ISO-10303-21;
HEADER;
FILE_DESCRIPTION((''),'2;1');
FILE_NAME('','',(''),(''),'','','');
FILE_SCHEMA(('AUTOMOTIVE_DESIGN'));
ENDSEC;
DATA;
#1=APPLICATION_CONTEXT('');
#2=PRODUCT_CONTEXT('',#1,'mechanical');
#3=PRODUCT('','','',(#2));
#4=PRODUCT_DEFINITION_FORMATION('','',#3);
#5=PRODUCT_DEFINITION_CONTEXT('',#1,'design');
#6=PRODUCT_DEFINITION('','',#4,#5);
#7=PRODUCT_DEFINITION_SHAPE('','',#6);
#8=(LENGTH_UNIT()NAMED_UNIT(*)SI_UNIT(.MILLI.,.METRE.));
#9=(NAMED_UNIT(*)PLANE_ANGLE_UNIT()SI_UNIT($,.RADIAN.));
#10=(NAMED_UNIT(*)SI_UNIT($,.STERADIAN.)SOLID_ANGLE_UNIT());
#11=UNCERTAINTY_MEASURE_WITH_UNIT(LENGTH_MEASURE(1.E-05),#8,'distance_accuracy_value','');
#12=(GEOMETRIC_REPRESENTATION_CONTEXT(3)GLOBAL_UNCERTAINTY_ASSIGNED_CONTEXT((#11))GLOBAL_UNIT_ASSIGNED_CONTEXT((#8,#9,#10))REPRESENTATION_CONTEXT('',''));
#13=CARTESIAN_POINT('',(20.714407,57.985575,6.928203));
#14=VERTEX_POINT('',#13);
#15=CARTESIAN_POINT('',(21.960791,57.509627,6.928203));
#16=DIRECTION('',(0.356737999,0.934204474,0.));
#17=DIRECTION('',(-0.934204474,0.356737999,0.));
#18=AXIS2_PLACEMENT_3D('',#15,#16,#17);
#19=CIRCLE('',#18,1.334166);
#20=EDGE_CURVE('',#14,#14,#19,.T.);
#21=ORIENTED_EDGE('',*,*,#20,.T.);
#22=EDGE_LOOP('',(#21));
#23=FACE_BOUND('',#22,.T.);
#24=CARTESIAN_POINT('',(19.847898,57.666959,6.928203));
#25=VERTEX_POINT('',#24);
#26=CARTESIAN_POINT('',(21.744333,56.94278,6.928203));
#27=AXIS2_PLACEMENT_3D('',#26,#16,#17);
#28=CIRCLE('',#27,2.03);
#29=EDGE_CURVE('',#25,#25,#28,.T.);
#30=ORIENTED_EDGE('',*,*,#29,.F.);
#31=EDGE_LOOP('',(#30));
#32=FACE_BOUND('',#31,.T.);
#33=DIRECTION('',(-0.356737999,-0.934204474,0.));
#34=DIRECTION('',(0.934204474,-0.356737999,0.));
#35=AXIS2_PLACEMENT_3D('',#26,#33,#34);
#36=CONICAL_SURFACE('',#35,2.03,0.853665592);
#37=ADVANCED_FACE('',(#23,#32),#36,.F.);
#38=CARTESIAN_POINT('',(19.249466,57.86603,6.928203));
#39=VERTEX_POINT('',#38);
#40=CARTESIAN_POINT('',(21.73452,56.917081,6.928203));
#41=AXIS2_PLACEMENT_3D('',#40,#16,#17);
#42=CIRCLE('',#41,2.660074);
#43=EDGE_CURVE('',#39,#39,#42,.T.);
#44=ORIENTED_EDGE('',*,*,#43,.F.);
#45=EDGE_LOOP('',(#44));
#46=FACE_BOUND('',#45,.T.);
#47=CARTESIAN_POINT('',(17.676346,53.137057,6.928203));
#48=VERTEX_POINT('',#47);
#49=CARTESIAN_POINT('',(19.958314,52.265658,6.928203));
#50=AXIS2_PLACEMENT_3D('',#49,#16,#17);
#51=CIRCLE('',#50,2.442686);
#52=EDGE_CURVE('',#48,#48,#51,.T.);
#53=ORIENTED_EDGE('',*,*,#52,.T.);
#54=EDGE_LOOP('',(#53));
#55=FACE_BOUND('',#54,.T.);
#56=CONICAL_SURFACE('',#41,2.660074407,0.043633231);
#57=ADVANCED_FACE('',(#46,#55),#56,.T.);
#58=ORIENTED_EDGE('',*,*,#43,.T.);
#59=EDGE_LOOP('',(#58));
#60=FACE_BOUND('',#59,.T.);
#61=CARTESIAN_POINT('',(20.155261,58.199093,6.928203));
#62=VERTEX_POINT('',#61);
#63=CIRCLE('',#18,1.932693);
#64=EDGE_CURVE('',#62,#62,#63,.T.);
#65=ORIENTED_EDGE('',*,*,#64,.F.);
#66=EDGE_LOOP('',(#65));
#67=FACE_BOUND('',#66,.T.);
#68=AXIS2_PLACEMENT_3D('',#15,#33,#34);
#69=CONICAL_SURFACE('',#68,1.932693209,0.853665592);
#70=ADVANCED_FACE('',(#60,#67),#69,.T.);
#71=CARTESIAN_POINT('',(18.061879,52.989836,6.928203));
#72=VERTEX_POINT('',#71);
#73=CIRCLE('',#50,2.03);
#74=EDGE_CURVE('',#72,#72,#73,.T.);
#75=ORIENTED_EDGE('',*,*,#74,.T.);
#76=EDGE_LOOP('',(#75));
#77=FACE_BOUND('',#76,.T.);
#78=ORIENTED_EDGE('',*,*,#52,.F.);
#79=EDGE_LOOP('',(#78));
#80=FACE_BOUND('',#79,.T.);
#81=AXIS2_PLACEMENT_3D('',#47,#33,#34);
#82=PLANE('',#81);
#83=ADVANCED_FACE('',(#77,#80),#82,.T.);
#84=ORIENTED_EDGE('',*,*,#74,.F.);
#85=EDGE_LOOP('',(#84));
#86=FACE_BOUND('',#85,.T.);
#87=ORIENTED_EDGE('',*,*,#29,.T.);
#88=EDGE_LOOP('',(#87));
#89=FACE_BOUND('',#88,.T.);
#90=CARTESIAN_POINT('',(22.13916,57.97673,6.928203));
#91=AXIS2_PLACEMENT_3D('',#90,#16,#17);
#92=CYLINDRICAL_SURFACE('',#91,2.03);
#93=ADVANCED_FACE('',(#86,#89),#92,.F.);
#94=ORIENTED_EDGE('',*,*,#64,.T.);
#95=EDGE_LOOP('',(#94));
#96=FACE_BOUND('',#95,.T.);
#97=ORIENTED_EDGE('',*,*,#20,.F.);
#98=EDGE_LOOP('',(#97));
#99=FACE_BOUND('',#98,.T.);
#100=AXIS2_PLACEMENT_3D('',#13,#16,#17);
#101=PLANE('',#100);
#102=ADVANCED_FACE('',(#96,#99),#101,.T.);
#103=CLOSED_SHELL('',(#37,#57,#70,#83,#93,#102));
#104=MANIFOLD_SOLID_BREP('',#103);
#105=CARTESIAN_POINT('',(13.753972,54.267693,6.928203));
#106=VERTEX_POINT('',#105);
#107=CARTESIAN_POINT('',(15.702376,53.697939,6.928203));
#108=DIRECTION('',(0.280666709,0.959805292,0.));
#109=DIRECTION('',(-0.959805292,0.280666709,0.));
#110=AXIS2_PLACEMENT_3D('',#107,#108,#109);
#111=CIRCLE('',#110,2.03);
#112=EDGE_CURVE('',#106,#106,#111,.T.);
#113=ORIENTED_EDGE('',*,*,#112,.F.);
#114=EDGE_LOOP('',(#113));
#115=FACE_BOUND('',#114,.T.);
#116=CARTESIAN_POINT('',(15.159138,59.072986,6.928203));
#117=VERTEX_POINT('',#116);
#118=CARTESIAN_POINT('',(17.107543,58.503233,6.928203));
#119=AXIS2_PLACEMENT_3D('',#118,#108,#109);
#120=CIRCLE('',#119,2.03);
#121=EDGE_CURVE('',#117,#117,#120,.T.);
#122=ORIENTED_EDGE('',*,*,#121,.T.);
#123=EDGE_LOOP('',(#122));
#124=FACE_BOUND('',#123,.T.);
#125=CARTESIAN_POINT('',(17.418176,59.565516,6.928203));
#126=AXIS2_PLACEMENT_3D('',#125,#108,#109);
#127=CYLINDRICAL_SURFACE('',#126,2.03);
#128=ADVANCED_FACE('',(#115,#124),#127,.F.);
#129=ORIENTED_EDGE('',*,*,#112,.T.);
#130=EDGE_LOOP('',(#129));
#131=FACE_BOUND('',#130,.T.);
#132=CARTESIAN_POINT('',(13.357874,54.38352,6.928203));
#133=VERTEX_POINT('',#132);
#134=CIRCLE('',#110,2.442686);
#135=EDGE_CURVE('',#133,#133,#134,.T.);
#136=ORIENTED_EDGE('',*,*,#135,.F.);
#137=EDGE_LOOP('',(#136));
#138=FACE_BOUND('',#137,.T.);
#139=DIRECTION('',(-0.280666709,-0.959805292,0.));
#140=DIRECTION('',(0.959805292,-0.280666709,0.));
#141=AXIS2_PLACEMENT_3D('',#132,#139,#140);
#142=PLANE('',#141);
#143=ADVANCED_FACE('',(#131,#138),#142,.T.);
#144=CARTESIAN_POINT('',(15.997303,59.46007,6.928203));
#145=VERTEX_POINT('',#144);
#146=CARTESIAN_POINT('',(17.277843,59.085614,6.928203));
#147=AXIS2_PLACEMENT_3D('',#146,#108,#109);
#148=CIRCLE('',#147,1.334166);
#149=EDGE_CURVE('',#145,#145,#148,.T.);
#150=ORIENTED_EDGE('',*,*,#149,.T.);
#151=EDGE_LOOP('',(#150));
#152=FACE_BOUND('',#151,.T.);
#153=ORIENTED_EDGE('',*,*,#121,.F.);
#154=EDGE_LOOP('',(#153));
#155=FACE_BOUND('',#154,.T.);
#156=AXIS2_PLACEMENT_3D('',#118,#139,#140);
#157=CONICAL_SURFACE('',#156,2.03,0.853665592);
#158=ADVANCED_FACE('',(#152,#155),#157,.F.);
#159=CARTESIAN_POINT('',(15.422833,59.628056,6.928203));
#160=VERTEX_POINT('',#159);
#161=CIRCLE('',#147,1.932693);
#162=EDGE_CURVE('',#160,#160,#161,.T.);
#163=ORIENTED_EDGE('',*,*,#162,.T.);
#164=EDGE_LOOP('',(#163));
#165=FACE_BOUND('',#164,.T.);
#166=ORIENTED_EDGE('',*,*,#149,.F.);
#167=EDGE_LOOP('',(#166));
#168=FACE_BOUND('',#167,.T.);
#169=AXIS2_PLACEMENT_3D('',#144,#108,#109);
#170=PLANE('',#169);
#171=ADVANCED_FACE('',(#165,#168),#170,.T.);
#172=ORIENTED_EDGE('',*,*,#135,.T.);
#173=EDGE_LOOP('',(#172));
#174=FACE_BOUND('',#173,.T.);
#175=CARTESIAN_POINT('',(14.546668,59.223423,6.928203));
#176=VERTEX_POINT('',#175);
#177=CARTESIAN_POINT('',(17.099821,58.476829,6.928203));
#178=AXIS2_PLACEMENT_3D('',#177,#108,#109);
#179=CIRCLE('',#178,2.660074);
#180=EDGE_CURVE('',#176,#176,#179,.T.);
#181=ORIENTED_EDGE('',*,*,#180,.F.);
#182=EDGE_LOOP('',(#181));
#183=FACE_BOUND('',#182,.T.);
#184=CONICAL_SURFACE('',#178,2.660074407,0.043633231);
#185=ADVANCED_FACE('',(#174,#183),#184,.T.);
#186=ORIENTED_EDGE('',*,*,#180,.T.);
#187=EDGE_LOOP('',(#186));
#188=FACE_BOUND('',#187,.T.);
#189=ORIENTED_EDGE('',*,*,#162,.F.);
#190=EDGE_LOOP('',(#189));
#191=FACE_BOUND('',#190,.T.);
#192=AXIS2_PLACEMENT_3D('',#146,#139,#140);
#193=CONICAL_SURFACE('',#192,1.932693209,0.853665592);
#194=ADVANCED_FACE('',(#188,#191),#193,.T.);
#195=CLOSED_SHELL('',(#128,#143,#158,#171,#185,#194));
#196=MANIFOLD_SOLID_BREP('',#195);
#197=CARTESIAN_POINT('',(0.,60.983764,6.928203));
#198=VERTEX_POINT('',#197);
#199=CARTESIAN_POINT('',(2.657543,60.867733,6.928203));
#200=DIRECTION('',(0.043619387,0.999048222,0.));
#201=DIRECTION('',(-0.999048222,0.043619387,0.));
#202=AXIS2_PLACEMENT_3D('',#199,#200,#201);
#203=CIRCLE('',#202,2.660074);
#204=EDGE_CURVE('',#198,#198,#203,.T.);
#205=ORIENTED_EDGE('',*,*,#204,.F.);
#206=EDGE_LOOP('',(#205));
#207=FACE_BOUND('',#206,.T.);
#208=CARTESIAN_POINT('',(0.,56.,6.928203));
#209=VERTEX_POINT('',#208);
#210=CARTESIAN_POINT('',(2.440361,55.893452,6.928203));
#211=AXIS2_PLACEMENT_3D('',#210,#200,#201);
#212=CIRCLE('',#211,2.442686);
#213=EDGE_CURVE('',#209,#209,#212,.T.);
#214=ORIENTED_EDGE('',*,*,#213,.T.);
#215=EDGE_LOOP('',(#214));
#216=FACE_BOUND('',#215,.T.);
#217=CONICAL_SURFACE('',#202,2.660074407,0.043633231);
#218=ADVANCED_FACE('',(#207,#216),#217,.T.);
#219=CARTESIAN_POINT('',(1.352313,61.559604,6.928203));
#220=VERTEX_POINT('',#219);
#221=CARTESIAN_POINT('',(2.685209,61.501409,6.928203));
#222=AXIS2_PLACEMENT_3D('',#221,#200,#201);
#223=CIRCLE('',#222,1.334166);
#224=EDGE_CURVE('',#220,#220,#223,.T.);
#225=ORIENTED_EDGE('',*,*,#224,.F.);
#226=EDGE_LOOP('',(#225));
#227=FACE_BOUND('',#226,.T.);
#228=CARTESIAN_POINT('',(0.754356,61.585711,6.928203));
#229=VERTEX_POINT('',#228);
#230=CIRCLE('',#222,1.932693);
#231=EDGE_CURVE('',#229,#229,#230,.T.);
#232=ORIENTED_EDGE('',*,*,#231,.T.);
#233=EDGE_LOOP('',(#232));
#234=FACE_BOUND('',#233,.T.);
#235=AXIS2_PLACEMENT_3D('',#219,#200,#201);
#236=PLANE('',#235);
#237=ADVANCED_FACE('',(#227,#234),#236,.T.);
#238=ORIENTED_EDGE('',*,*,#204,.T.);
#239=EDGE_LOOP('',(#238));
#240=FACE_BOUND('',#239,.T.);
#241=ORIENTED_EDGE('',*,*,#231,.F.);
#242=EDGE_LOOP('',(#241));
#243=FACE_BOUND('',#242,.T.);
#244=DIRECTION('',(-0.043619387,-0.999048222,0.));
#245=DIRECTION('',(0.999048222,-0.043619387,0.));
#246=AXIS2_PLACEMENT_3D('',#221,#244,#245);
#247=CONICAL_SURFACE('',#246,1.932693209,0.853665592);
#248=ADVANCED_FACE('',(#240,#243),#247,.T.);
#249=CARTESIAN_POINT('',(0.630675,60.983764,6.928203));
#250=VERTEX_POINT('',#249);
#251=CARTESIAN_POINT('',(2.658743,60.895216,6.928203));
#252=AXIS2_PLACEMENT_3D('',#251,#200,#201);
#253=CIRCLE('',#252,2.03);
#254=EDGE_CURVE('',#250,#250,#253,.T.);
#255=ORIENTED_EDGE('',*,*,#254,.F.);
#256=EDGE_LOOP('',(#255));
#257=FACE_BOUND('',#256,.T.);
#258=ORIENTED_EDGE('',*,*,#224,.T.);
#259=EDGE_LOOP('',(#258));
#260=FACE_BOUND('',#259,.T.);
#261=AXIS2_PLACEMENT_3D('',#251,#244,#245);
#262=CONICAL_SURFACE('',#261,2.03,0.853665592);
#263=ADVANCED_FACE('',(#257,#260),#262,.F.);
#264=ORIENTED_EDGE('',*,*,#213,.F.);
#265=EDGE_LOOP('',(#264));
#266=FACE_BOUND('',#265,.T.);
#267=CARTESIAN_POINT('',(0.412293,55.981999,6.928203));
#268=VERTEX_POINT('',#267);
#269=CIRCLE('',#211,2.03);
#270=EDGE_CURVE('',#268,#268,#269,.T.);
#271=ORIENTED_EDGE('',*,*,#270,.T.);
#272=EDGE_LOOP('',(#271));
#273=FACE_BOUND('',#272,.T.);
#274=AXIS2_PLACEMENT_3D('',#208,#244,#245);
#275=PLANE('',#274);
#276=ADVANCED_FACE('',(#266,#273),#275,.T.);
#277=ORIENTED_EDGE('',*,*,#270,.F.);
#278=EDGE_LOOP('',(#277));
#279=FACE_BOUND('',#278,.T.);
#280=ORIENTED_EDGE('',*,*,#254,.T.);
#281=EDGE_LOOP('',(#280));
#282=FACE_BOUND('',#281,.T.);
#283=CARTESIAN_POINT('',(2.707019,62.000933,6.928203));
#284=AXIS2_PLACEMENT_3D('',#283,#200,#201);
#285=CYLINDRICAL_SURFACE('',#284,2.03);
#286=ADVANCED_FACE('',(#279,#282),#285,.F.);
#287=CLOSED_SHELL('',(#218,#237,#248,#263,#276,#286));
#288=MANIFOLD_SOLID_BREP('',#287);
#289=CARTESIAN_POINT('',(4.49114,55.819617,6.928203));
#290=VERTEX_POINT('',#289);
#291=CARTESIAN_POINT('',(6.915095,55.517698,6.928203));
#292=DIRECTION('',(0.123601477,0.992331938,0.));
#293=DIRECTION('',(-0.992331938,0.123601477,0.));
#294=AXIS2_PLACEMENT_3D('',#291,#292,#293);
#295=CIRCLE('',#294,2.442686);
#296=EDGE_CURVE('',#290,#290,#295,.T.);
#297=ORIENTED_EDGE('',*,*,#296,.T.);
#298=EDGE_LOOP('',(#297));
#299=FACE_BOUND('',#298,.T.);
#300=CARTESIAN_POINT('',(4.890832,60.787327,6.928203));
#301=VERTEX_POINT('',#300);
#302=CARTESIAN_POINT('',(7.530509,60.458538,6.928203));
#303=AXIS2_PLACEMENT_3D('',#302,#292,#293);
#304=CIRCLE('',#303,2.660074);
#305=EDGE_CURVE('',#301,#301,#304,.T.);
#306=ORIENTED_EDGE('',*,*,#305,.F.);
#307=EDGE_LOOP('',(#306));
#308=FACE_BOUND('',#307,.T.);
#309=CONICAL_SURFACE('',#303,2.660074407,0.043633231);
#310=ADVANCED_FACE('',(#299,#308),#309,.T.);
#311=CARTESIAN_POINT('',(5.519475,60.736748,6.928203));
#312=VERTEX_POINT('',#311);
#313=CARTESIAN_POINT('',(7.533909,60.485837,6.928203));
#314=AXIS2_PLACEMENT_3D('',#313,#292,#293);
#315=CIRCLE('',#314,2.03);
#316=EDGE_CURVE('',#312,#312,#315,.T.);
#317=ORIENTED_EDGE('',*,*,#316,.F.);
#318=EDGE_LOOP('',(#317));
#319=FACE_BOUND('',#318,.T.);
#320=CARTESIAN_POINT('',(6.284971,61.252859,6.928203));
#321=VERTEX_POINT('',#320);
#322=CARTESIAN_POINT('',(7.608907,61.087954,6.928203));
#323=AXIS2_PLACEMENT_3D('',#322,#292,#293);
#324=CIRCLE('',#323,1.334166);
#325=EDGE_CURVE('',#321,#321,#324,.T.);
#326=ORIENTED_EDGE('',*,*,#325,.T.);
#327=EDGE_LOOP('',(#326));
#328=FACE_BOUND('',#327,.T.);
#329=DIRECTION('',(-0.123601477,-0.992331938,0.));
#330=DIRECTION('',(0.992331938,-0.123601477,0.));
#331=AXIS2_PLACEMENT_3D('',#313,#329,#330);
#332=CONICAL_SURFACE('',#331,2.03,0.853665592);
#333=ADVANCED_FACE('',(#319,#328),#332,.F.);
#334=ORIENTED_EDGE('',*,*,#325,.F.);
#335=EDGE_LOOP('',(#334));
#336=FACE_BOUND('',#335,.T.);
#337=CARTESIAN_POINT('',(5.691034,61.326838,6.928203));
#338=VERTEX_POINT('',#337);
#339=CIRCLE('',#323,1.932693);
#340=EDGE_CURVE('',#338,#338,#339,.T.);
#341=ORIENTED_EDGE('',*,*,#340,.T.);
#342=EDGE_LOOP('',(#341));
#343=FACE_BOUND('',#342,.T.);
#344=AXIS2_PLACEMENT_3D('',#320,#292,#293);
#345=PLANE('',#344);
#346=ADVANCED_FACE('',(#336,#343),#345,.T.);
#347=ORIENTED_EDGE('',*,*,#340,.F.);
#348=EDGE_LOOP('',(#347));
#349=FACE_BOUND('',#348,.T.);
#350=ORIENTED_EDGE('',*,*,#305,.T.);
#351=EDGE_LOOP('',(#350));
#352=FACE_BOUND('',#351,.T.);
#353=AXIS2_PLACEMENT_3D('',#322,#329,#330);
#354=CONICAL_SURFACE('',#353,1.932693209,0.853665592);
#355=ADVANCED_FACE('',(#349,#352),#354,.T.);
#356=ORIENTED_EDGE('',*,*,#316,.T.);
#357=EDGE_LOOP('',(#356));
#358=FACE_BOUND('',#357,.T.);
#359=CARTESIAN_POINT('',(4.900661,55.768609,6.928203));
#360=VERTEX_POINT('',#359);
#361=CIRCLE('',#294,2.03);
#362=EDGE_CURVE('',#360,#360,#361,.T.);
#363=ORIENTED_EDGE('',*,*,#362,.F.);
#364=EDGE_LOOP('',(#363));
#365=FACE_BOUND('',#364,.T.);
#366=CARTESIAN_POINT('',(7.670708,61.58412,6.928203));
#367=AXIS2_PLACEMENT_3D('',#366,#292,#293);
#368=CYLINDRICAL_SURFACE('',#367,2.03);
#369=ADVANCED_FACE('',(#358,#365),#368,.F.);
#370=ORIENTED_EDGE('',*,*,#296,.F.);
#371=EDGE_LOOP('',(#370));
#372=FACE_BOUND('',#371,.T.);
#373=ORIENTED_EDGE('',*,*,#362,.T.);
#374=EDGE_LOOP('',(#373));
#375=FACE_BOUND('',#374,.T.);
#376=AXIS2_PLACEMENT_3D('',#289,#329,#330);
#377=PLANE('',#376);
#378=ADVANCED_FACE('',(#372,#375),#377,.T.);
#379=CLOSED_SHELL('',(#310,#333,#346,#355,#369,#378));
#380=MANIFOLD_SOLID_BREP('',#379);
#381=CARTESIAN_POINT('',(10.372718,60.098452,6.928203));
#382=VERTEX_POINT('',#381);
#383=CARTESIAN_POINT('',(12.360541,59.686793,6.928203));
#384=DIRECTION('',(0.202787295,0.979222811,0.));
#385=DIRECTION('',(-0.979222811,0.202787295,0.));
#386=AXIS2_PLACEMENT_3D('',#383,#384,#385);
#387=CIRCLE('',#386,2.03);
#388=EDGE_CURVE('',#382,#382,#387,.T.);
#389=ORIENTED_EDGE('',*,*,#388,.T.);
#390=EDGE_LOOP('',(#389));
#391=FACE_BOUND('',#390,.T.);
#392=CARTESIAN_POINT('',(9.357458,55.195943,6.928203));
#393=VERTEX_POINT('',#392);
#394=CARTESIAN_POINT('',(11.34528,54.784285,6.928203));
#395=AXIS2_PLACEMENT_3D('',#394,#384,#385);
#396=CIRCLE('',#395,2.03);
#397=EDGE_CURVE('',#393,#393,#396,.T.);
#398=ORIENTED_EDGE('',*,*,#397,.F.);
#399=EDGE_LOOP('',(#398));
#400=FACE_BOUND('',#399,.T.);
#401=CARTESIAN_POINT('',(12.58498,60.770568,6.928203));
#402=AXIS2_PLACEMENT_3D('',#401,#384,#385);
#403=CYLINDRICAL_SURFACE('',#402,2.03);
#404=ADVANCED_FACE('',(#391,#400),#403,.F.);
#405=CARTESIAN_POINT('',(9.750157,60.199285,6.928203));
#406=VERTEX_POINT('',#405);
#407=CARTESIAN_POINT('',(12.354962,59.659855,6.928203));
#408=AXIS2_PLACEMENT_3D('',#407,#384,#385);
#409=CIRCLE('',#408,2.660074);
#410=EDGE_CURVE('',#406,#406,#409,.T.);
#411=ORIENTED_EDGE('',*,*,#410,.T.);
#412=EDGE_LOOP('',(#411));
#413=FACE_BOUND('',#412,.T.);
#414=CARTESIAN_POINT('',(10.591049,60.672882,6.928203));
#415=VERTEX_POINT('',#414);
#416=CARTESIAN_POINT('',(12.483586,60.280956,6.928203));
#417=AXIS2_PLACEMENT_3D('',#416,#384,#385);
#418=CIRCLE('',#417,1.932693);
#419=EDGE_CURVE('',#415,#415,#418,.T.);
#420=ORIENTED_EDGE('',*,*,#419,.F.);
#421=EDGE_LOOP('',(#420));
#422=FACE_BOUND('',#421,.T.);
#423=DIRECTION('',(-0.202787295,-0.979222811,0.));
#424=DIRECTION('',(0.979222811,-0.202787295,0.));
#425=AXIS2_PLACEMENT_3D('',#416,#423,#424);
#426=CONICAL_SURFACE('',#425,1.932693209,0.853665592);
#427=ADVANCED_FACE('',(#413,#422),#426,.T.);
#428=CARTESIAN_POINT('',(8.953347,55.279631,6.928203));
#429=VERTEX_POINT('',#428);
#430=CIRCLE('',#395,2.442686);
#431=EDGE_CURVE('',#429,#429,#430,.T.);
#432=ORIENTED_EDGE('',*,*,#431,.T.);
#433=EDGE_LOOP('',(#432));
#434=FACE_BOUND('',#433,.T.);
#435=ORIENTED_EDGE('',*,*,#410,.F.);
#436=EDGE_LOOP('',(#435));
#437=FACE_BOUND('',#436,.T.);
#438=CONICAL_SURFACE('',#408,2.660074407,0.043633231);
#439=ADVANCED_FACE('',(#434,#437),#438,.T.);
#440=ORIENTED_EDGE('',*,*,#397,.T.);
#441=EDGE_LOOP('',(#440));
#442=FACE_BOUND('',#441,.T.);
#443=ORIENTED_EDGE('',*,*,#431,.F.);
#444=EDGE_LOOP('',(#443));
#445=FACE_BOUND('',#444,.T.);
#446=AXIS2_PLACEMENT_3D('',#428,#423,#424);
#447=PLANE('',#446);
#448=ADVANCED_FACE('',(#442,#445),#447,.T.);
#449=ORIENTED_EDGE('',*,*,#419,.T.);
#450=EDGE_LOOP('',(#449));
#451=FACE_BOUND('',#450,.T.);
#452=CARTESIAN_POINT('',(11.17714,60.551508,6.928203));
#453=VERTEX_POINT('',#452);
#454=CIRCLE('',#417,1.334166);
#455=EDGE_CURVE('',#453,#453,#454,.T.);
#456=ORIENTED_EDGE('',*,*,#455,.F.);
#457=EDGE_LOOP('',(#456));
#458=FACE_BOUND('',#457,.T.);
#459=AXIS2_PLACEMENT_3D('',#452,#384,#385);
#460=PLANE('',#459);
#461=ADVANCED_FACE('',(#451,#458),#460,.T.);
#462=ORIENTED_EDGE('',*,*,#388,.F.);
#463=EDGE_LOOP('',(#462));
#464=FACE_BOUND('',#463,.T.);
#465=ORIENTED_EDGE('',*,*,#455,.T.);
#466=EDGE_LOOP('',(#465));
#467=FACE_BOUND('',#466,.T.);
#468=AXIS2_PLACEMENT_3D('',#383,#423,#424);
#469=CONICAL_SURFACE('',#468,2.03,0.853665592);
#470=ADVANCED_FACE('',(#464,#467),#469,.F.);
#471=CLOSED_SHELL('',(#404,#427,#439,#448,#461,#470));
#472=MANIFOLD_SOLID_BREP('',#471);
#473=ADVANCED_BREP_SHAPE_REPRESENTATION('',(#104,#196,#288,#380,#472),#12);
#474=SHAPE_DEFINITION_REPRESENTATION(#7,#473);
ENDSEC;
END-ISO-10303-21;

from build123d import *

# Parameters (mm, degrees)
CIRPATTERN2_COUNT = 5
CIRPATTERN2_ANGLE = 18.4


# Read off the part's stored shape, not the designer's step: Revolve2
with BuildPart() as part:
    # Revolve2 outline → Revolve2 (revolve)
    with BuildSketch(Plane(origin=(0, 0, 6.92820323), x_dir=(0.9990482215818577, -0.04361938736533579, 0), z_dir=(0, 0, 1))):
        Polygon((2.03, 60.953230193), (2.03, 55.946700409), (2.442685692, 55.946700409), (2.660074407, 60.92572055), (1.932693209, 61.56), (1.334166406, 61.56), align=None)
    revolve(axis=Axis((0, 0, 6.92820323), (0.04361938736533579, 0.9990482215818577, 0)))


with BuildPart() as cirpattern2_1:
    # CirPattern2: pattern copy
    add(part.part.rotate(Axis((0, 0, 0), (0, 0, -1)), 1 * CIRPATTERN2_ANGLE / (CIRPATTERN2_COUNT - 1)))


with BuildPart() as cirpattern2_2:
    # CirPattern2: pattern copy
    add(part.part.rotate(Axis((0, 0, 0), (0, 0, -1)), 2 * CIRPATTERN2_ANGLE / (CIRPATTERN2_COUNT - 1)))


with BuildPart() as cirpattern2_3:
    # CirPattern2: pattern copy
    add(part.part.rotate(Axis((0, 0, 0), (0, 0, -1)), 3 * CIRPATTERN2_ANGLE / (CIRPATTERN2_COUNT - 1)))


with BuildPart() as cirpattern2_4:
    # CirPattern2: pattern copy
    add(part.part.rotate(Axis((0, 0, 0), (0, 0, -1)), 4 * CIRPATTERN2_ANGLE / (CIRPATTERN2_COUNT - 1)))


solid = Compound([part.part, cirpattern2_1.part, cirpattern2_2.part, cirpattern2_3.part, cirpattern2_4.part])
